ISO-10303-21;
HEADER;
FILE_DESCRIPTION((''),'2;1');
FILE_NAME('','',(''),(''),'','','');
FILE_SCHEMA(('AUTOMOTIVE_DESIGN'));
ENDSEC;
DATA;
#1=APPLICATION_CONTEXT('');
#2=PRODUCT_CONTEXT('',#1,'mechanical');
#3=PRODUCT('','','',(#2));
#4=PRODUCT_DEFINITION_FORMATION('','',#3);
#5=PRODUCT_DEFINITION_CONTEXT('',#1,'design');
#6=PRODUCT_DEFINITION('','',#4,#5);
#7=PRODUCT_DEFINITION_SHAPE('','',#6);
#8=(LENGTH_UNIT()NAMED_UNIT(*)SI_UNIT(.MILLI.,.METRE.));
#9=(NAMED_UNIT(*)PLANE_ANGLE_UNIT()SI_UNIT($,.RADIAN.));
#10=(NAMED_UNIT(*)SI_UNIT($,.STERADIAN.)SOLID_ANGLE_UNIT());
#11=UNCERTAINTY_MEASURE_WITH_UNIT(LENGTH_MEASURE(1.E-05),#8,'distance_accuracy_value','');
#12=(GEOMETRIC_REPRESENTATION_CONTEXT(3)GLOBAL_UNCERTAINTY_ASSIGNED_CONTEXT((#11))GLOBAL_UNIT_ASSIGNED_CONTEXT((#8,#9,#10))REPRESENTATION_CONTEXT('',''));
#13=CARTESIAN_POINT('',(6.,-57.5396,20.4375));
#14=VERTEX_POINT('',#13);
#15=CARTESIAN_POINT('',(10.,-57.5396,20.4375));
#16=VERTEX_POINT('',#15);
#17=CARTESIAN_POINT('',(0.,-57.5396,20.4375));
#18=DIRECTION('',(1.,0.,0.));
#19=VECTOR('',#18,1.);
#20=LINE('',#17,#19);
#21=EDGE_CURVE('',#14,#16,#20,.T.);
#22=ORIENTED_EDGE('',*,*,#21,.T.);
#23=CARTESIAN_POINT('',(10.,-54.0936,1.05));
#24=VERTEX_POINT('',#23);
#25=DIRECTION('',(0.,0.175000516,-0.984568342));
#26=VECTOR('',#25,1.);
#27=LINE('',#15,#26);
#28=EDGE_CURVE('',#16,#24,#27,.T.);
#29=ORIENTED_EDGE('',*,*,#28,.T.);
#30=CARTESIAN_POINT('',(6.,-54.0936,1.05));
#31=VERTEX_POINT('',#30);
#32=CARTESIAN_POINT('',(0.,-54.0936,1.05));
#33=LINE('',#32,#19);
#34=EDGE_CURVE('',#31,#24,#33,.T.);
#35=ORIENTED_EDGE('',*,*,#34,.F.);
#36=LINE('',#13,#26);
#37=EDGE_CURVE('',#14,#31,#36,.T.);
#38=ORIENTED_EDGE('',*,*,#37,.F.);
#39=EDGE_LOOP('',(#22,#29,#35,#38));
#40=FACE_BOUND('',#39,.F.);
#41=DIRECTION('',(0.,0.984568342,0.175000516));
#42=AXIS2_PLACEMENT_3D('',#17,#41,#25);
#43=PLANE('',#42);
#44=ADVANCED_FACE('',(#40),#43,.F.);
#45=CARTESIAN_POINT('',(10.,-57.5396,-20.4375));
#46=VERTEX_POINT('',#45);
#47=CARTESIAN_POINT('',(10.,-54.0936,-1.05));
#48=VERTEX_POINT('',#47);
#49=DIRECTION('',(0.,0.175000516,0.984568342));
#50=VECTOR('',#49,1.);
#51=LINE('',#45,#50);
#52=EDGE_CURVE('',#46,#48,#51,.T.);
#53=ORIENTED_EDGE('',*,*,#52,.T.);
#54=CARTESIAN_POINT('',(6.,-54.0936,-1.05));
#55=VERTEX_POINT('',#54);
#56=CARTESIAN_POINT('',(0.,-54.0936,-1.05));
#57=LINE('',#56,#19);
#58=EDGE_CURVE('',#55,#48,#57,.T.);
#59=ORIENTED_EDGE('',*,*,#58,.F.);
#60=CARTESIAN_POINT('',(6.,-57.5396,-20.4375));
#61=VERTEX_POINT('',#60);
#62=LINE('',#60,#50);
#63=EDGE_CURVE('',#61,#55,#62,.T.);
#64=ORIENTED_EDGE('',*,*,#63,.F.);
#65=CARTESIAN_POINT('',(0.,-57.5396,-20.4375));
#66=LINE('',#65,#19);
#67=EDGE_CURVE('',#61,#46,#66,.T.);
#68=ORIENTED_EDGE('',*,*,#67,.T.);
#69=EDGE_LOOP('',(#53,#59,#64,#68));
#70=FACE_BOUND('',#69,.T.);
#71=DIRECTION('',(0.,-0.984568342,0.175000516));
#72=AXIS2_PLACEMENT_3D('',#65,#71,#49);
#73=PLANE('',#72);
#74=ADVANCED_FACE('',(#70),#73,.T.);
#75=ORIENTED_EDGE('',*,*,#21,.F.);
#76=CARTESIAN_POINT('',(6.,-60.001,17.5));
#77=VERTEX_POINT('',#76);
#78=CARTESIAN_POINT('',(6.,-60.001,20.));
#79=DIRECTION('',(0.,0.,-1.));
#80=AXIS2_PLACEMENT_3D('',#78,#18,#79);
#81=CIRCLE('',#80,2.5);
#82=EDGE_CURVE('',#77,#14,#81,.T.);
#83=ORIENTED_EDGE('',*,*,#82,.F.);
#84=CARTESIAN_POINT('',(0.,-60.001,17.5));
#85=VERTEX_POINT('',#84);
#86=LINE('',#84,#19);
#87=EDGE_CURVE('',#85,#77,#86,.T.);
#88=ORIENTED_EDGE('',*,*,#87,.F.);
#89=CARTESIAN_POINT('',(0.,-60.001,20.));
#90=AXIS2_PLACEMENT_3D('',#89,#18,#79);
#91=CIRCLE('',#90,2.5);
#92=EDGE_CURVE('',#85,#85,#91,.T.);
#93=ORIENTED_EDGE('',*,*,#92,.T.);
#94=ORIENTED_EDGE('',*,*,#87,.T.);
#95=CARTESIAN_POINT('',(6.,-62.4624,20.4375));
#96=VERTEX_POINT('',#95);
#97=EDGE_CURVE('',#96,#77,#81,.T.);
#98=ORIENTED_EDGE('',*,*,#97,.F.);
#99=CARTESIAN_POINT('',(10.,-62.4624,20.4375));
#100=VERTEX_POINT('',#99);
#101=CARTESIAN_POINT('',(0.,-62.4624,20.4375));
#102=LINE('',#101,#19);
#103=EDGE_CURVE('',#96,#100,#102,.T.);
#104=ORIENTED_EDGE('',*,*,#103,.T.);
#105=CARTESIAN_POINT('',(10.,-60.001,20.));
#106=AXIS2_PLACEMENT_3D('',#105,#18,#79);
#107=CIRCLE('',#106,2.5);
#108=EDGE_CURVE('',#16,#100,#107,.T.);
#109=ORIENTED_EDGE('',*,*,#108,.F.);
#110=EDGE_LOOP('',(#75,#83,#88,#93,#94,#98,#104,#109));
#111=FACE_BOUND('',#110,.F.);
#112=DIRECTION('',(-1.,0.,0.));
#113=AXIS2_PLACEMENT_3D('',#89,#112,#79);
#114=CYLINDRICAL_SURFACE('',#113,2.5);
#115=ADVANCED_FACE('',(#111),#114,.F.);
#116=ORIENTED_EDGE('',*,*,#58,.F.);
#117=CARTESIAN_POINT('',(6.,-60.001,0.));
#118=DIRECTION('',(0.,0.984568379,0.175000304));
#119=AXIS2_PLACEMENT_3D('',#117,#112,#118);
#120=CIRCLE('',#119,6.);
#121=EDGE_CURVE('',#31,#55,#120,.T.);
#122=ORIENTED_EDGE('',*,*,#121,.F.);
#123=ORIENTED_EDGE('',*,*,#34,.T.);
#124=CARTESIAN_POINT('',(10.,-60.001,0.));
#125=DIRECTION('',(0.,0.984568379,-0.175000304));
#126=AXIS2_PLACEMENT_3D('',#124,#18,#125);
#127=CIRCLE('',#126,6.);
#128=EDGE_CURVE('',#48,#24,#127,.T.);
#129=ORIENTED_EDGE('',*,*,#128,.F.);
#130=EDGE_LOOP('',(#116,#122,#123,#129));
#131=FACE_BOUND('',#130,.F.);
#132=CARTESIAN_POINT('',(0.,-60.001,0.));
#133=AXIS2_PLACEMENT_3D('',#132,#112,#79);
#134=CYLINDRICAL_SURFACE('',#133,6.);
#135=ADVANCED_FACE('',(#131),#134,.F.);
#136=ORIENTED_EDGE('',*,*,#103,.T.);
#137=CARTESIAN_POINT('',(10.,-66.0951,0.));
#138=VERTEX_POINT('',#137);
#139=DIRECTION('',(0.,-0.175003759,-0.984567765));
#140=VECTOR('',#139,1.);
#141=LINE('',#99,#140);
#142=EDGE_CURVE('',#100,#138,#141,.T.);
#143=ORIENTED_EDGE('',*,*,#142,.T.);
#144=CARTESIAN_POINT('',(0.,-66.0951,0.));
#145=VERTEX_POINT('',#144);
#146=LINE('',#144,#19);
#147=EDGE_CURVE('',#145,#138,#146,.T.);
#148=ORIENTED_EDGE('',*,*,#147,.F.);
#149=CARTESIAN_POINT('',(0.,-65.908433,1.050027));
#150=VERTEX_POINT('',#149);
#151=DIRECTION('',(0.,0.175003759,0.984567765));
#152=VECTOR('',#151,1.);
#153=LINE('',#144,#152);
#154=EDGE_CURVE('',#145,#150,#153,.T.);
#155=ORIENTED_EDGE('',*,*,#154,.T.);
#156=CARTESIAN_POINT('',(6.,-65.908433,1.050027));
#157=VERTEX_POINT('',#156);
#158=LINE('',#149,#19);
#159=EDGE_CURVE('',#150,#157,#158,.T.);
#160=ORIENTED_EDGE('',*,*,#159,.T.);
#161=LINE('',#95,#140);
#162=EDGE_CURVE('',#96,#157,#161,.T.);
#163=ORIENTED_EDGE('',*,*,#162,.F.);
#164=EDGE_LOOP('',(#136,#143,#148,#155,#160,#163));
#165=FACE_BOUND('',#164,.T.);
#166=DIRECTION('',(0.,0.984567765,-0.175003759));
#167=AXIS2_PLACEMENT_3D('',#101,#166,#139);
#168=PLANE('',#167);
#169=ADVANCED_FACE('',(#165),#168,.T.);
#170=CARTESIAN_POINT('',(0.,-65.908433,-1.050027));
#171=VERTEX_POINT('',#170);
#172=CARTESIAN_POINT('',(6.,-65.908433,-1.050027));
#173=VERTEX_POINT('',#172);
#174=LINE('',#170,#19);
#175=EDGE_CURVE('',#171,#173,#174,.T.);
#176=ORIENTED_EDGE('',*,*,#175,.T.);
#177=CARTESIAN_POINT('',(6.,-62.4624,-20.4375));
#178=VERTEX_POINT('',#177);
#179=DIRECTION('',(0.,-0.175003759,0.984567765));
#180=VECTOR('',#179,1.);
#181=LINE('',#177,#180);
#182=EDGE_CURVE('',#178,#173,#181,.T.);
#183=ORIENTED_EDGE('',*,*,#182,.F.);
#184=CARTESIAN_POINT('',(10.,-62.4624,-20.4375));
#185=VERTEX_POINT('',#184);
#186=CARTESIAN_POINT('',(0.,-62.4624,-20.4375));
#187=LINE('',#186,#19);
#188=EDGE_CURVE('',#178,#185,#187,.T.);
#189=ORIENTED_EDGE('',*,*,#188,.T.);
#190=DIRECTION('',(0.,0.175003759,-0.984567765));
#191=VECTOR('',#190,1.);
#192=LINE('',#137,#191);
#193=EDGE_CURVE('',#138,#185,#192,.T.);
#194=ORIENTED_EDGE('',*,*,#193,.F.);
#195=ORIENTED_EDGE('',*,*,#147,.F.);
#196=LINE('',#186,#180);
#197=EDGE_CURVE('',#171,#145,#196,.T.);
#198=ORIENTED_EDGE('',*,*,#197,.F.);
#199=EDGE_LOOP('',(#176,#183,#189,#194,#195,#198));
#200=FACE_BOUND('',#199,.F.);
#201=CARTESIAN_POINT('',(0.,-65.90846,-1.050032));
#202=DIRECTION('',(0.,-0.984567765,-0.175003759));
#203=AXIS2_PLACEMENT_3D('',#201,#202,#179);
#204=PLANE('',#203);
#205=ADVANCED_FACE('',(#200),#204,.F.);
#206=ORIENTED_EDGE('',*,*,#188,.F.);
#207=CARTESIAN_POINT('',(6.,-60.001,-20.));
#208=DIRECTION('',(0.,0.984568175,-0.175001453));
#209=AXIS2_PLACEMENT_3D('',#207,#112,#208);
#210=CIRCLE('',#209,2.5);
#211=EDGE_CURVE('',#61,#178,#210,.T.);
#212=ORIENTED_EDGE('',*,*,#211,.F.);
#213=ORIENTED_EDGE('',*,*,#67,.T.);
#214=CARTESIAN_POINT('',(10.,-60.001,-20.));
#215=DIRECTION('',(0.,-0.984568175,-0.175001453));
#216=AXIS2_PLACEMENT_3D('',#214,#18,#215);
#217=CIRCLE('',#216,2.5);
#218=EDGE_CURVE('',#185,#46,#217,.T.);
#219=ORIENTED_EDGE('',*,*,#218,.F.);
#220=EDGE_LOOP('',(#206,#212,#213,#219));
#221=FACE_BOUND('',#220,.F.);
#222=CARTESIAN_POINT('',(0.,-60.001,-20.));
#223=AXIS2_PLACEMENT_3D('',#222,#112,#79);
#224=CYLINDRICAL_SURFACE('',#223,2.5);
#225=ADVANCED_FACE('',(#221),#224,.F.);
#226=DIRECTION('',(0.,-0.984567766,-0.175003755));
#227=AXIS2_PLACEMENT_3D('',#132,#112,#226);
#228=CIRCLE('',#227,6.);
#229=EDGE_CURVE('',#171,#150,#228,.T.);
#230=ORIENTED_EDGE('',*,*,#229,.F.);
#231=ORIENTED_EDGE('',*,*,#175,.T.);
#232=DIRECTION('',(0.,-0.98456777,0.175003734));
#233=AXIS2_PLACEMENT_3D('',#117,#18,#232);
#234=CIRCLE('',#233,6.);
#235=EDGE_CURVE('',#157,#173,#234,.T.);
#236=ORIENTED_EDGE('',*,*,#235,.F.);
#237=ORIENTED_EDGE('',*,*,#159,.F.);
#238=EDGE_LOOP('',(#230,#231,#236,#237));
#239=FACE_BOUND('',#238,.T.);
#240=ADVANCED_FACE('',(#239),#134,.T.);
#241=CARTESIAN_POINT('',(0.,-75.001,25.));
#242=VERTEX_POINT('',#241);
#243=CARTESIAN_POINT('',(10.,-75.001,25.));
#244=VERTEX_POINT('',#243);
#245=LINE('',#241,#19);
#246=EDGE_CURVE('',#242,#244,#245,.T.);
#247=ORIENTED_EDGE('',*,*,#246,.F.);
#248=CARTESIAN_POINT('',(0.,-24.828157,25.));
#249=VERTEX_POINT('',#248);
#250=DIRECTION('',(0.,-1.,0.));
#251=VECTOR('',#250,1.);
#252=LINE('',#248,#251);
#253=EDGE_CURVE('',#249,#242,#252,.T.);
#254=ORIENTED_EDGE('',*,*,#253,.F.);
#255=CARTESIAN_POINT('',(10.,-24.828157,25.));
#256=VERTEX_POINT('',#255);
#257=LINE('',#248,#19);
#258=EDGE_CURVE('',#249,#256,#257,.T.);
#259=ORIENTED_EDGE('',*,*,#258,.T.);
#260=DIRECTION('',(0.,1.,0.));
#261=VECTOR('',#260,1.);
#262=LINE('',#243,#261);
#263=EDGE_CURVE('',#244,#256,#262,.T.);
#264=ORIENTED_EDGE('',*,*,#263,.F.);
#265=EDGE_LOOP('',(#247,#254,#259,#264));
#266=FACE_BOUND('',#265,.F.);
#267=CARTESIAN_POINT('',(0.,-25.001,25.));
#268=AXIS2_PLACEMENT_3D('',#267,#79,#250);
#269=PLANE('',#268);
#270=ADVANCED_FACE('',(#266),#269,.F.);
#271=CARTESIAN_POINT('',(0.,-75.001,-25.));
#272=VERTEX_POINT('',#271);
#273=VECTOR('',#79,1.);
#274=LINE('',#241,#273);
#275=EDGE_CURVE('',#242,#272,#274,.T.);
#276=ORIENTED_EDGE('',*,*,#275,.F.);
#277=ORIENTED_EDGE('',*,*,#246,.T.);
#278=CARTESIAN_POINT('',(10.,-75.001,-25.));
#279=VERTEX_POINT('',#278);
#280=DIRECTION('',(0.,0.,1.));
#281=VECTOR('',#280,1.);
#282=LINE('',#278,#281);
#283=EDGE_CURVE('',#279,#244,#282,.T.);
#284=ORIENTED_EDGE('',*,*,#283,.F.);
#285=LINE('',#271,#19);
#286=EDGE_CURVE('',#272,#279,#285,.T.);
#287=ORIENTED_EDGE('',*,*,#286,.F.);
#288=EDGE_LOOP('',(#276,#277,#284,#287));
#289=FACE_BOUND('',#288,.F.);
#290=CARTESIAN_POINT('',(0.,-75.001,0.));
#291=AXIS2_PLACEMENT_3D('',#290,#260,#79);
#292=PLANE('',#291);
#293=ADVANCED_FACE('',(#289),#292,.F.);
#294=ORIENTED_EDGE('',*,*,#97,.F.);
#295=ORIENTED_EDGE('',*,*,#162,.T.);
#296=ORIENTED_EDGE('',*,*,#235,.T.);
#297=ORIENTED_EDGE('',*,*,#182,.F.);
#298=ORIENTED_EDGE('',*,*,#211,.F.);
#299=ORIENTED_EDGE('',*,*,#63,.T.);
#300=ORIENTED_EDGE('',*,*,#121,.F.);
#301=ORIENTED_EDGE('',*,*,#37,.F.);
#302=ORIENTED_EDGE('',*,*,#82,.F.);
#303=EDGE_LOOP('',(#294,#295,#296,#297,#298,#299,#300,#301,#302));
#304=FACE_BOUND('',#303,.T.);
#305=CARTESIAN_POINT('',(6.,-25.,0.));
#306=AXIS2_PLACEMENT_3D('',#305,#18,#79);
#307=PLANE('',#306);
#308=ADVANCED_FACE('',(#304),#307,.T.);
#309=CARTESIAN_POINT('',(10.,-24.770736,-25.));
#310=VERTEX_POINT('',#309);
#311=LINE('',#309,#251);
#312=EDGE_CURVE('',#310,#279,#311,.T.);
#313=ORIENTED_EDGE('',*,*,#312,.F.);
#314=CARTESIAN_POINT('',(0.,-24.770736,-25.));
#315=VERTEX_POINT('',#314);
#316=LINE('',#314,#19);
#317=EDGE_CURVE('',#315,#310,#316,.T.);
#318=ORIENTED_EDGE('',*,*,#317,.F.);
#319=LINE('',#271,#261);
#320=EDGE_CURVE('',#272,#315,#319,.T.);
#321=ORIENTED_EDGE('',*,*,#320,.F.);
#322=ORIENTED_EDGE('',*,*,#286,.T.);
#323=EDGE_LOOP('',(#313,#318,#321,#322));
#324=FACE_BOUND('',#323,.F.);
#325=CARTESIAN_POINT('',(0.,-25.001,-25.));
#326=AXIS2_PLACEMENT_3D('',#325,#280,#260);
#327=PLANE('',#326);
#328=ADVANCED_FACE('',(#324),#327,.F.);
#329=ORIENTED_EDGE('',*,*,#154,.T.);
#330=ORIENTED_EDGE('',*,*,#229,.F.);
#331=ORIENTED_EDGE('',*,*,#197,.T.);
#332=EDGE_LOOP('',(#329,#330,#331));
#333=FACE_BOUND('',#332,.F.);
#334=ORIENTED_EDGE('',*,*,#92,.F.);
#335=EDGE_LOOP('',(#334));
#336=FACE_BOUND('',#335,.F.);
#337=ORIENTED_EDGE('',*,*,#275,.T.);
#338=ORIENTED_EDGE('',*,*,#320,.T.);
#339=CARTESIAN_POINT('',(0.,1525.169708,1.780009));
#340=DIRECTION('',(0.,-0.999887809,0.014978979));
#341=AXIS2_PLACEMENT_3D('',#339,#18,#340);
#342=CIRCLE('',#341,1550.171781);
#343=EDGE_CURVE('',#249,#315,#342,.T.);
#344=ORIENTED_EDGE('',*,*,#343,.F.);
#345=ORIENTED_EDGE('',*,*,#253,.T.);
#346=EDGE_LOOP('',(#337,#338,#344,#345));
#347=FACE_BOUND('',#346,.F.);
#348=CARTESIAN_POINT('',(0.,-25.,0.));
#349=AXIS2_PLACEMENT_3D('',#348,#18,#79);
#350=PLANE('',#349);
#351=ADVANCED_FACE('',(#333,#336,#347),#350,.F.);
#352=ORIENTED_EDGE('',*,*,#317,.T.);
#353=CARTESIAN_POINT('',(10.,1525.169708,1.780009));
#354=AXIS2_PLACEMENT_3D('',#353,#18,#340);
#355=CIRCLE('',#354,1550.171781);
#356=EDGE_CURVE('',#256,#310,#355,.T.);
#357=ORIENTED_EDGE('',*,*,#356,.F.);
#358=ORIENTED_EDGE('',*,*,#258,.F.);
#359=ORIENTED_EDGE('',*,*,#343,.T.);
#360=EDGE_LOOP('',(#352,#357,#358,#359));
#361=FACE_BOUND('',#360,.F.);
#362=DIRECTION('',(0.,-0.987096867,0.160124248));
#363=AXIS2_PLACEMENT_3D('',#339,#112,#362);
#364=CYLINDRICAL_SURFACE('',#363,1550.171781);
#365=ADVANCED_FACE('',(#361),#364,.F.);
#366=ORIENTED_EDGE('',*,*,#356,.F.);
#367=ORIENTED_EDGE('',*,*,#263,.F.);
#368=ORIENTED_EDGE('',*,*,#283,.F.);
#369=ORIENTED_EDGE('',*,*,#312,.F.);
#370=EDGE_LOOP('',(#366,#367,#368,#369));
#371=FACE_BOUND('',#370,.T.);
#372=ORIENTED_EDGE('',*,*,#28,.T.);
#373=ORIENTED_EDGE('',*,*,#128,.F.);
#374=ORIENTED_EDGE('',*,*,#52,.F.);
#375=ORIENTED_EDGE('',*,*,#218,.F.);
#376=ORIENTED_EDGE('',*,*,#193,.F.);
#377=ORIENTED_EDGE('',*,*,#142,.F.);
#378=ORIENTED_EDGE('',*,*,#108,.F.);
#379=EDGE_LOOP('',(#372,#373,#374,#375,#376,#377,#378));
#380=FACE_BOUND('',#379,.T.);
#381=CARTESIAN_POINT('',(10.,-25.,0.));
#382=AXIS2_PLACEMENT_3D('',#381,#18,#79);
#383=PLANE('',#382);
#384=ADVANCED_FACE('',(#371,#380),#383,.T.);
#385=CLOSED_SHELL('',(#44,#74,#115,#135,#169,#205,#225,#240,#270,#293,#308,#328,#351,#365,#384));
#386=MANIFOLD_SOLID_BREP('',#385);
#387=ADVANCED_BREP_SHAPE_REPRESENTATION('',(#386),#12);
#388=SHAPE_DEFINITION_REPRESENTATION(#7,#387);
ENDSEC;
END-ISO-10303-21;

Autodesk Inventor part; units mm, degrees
ref_plane "YZ Plane" through (0, 0, 0) normal (1, 0, 0) x (0, 1, 0)
ref_plane "XZ Plane" through (0, 0, 0) normal (0, 1, 0) x (-1, 0, 0)
ref_plane "XY Plane" through (0, 0, 0) normal (0, 0, 1) x (1, 0, 0)
sketch "Boceto1" plane through (0, 0, 0) normal (1, 0, 0) x (0, 1, 0)
  line L0 (0, 0) -> (0, 125)
  line L1 (0, 0) -> (125, 0) construction
  line L2 (0, 0) -> (0, -125)
  line L3 (0, 0) -> (125, 0) construction
  line L4 (0, 0) -> (-20, 0)
  line L5 (0, 0) -> (20, 0) construction
  line L6 (0, 0) -> (500, 0) construction
  line L7 (0, 0) -> (-20, 0)
  line L8 (0, 0) -> (20, 0) construction
  line L9 (0, 0) -> (0, -246.4363)
  line L10 (0, 0) -> (246.4363, 0) construction
  line L11 (0, 0) -> (0, 250)
  line L12 (0, 0) -> (250, 0) construction
  arc A0 (0, 250) -> (0, -246.4363) centre (1530.2267, 1.7819) ccw
  line L13 (0, 125) -> (-100, 125)
  line L14 (0, 125) -> (100, 125) construction
  line L15 (0, 250) -> (-5, 250)
  line L16 (0, 250) -> (5, 250) construction
  line L17 (0, -246.4363) -> (-5, -246.4363)
  line L18 (-20, 0) -> (-23, 0)
  line L19 (-20, 0) -> (-17, 0) construction
  line L20 (-20, 0) -> (-25, 0)
  line L21 (-20, 0) -> (-15, 0) construction
  arc A1 (-5, 250) -> (-5, -246.4363) centre (1525.2267, 1.7819) ccw
  point P0 (-20.0963, 125)
  point P1 (-15.0963, 125)
  dimension "d14" = 100
  dimension "d15" = 180
  dimension "d16" = 5
  dimension "d17" = 180
  dimension "d18" = 5
  dimension "d19" = 3
  dimension "d20" = 180
  dimension "d21" = 5
  dimension "d22" = 180
revolve "Revolución1" add sketch "Boceto1" angle 90 about axis through (0, -20, 0) along (0, -1, 0) contours L18 L20 A1 L13 A0
fillet "Empalme1" [suppressed]
sketch "Boceto2" plane through (0, -25, 0) normal (1, 0, 0) x (0, 0, -1)
  line L0 (0, -0.001) -> (0, 4.7578) projected
  line L1 (0, -0.001) -> (25, -0.001) construction
  line L2 (0, -0.001) -> (0, -25.001)
  line L3 (0, -0.001) -> (25, -0.001) construction
  line L4 (-25, -50.001) -> (25, -50.001)
  line L5 (25, -50.001) -> (25, -0.001)
  line L6 (-25, -0.001) -> (-25, -50.001)
  line L7 (-25, -50.001) -> (25, -0.001) construction
  line L8 (25, -50.001) -> (-25, -0.001) construction
  arc A0 (-250.0001, 20) -> (246.437, 19.9995) centre (-1.7798, 1550.1723) ccw
  line L9 (-25, -0.001) -> (-25, 0.2817)
  line L10 (25, -0.001) -> (25, 0.5411)
  line L11 (0, -50.001) -> (0, -35.001)
  line L12 (0, -50.001) -> (15, -50.001) construction
  circle A1 centre (0, -35.001) radius 6
  line L13 (0, -35.001) -> (-20, -35.001)
  line L14 (0, -35.001) -> (20, -35.001) construction
  circle A2 centre (-20, -35.001) radius 2.5
  line L15 (-20.4375, -32.5396) -> (-1.05, -29.0936)
  line L16 (-20.4375, -37.4624) -> (0, -41.0951)
  line L17 (0, -35.001) -> (0, -29.001)
  line L18 (25, -50.001) -> (-25, -0.001) construction
  circle A3 centre (0, -35.001) radius 6
  line L19 (0, -35.001) -> (20, -35.001)
  circle A4 centre (20, -35.001) radius 2.5
  line L20 (20.4375, -32.5396) -> (1.05, -29.0936)
  line L21 (20.4375, -37.4624) -> (0, -41.0951)
  point P0 (0, 25)
  point P1 (0, 0)
  point P2 (-20.2213, -32.5012)
  point P3 (20.2213, -32.5012)
  point P4 (1.05, -29.0936)
  point P5 (25, 0.2293)
  point P6 (-25, 0.1719)
  point P7 (0, 4.9037)
  point P8 (-1.05, -40.9084)
  point P9 (1.05, -40.9084)
  dimension "d25" = 25
  dimension "d27" = 25
  dimension "d28" = 90
  dimension "d29" = 50
  dimension "d30" = 50
  dimension "d31" = 15
  dimension "d32" = 90
  dimension "d33" = 12
  dimension "d34" = 20
  dimension "d35" = 180
  dimension "d36" = 5
extrude "Extrusión1" add sketch "Boceto2" along normal blind 10
extrude "Extrusión2" add sketch "Boceto2" along normal blind 6 contours A1 L13 L11 | L11 L19 A1 | L16 A2 L13 A1 | A1 L19 A4 L21 | L13 A1 L17 | L17 A1 L19 | L13 A2 L15 A1 | A1 L20 A4 L19 | A4
sketch "Boceto3" plane through (0, -25, 0) normal (1, 0, 0) x (0, 0, -1)
  arc A0 (-25, 0.1719) -> (25, 0.2293) centre (-1.7798, 1550.1723) ccw projected
  line L0 (0, -0.001) -> (-143.598, -0.001)
  line L1 (-143.598, -0.001) -> (-143.598, 29.4802)
  line L2 (-143.598, 29.4802) -> (0, 29.4802)
  line L3 (0, 29.4802) -> (0, -0.001)
  point P0 (0, 25)
extrude "Extrusión3" cut sketch "Boceto3" against normal blind 152
